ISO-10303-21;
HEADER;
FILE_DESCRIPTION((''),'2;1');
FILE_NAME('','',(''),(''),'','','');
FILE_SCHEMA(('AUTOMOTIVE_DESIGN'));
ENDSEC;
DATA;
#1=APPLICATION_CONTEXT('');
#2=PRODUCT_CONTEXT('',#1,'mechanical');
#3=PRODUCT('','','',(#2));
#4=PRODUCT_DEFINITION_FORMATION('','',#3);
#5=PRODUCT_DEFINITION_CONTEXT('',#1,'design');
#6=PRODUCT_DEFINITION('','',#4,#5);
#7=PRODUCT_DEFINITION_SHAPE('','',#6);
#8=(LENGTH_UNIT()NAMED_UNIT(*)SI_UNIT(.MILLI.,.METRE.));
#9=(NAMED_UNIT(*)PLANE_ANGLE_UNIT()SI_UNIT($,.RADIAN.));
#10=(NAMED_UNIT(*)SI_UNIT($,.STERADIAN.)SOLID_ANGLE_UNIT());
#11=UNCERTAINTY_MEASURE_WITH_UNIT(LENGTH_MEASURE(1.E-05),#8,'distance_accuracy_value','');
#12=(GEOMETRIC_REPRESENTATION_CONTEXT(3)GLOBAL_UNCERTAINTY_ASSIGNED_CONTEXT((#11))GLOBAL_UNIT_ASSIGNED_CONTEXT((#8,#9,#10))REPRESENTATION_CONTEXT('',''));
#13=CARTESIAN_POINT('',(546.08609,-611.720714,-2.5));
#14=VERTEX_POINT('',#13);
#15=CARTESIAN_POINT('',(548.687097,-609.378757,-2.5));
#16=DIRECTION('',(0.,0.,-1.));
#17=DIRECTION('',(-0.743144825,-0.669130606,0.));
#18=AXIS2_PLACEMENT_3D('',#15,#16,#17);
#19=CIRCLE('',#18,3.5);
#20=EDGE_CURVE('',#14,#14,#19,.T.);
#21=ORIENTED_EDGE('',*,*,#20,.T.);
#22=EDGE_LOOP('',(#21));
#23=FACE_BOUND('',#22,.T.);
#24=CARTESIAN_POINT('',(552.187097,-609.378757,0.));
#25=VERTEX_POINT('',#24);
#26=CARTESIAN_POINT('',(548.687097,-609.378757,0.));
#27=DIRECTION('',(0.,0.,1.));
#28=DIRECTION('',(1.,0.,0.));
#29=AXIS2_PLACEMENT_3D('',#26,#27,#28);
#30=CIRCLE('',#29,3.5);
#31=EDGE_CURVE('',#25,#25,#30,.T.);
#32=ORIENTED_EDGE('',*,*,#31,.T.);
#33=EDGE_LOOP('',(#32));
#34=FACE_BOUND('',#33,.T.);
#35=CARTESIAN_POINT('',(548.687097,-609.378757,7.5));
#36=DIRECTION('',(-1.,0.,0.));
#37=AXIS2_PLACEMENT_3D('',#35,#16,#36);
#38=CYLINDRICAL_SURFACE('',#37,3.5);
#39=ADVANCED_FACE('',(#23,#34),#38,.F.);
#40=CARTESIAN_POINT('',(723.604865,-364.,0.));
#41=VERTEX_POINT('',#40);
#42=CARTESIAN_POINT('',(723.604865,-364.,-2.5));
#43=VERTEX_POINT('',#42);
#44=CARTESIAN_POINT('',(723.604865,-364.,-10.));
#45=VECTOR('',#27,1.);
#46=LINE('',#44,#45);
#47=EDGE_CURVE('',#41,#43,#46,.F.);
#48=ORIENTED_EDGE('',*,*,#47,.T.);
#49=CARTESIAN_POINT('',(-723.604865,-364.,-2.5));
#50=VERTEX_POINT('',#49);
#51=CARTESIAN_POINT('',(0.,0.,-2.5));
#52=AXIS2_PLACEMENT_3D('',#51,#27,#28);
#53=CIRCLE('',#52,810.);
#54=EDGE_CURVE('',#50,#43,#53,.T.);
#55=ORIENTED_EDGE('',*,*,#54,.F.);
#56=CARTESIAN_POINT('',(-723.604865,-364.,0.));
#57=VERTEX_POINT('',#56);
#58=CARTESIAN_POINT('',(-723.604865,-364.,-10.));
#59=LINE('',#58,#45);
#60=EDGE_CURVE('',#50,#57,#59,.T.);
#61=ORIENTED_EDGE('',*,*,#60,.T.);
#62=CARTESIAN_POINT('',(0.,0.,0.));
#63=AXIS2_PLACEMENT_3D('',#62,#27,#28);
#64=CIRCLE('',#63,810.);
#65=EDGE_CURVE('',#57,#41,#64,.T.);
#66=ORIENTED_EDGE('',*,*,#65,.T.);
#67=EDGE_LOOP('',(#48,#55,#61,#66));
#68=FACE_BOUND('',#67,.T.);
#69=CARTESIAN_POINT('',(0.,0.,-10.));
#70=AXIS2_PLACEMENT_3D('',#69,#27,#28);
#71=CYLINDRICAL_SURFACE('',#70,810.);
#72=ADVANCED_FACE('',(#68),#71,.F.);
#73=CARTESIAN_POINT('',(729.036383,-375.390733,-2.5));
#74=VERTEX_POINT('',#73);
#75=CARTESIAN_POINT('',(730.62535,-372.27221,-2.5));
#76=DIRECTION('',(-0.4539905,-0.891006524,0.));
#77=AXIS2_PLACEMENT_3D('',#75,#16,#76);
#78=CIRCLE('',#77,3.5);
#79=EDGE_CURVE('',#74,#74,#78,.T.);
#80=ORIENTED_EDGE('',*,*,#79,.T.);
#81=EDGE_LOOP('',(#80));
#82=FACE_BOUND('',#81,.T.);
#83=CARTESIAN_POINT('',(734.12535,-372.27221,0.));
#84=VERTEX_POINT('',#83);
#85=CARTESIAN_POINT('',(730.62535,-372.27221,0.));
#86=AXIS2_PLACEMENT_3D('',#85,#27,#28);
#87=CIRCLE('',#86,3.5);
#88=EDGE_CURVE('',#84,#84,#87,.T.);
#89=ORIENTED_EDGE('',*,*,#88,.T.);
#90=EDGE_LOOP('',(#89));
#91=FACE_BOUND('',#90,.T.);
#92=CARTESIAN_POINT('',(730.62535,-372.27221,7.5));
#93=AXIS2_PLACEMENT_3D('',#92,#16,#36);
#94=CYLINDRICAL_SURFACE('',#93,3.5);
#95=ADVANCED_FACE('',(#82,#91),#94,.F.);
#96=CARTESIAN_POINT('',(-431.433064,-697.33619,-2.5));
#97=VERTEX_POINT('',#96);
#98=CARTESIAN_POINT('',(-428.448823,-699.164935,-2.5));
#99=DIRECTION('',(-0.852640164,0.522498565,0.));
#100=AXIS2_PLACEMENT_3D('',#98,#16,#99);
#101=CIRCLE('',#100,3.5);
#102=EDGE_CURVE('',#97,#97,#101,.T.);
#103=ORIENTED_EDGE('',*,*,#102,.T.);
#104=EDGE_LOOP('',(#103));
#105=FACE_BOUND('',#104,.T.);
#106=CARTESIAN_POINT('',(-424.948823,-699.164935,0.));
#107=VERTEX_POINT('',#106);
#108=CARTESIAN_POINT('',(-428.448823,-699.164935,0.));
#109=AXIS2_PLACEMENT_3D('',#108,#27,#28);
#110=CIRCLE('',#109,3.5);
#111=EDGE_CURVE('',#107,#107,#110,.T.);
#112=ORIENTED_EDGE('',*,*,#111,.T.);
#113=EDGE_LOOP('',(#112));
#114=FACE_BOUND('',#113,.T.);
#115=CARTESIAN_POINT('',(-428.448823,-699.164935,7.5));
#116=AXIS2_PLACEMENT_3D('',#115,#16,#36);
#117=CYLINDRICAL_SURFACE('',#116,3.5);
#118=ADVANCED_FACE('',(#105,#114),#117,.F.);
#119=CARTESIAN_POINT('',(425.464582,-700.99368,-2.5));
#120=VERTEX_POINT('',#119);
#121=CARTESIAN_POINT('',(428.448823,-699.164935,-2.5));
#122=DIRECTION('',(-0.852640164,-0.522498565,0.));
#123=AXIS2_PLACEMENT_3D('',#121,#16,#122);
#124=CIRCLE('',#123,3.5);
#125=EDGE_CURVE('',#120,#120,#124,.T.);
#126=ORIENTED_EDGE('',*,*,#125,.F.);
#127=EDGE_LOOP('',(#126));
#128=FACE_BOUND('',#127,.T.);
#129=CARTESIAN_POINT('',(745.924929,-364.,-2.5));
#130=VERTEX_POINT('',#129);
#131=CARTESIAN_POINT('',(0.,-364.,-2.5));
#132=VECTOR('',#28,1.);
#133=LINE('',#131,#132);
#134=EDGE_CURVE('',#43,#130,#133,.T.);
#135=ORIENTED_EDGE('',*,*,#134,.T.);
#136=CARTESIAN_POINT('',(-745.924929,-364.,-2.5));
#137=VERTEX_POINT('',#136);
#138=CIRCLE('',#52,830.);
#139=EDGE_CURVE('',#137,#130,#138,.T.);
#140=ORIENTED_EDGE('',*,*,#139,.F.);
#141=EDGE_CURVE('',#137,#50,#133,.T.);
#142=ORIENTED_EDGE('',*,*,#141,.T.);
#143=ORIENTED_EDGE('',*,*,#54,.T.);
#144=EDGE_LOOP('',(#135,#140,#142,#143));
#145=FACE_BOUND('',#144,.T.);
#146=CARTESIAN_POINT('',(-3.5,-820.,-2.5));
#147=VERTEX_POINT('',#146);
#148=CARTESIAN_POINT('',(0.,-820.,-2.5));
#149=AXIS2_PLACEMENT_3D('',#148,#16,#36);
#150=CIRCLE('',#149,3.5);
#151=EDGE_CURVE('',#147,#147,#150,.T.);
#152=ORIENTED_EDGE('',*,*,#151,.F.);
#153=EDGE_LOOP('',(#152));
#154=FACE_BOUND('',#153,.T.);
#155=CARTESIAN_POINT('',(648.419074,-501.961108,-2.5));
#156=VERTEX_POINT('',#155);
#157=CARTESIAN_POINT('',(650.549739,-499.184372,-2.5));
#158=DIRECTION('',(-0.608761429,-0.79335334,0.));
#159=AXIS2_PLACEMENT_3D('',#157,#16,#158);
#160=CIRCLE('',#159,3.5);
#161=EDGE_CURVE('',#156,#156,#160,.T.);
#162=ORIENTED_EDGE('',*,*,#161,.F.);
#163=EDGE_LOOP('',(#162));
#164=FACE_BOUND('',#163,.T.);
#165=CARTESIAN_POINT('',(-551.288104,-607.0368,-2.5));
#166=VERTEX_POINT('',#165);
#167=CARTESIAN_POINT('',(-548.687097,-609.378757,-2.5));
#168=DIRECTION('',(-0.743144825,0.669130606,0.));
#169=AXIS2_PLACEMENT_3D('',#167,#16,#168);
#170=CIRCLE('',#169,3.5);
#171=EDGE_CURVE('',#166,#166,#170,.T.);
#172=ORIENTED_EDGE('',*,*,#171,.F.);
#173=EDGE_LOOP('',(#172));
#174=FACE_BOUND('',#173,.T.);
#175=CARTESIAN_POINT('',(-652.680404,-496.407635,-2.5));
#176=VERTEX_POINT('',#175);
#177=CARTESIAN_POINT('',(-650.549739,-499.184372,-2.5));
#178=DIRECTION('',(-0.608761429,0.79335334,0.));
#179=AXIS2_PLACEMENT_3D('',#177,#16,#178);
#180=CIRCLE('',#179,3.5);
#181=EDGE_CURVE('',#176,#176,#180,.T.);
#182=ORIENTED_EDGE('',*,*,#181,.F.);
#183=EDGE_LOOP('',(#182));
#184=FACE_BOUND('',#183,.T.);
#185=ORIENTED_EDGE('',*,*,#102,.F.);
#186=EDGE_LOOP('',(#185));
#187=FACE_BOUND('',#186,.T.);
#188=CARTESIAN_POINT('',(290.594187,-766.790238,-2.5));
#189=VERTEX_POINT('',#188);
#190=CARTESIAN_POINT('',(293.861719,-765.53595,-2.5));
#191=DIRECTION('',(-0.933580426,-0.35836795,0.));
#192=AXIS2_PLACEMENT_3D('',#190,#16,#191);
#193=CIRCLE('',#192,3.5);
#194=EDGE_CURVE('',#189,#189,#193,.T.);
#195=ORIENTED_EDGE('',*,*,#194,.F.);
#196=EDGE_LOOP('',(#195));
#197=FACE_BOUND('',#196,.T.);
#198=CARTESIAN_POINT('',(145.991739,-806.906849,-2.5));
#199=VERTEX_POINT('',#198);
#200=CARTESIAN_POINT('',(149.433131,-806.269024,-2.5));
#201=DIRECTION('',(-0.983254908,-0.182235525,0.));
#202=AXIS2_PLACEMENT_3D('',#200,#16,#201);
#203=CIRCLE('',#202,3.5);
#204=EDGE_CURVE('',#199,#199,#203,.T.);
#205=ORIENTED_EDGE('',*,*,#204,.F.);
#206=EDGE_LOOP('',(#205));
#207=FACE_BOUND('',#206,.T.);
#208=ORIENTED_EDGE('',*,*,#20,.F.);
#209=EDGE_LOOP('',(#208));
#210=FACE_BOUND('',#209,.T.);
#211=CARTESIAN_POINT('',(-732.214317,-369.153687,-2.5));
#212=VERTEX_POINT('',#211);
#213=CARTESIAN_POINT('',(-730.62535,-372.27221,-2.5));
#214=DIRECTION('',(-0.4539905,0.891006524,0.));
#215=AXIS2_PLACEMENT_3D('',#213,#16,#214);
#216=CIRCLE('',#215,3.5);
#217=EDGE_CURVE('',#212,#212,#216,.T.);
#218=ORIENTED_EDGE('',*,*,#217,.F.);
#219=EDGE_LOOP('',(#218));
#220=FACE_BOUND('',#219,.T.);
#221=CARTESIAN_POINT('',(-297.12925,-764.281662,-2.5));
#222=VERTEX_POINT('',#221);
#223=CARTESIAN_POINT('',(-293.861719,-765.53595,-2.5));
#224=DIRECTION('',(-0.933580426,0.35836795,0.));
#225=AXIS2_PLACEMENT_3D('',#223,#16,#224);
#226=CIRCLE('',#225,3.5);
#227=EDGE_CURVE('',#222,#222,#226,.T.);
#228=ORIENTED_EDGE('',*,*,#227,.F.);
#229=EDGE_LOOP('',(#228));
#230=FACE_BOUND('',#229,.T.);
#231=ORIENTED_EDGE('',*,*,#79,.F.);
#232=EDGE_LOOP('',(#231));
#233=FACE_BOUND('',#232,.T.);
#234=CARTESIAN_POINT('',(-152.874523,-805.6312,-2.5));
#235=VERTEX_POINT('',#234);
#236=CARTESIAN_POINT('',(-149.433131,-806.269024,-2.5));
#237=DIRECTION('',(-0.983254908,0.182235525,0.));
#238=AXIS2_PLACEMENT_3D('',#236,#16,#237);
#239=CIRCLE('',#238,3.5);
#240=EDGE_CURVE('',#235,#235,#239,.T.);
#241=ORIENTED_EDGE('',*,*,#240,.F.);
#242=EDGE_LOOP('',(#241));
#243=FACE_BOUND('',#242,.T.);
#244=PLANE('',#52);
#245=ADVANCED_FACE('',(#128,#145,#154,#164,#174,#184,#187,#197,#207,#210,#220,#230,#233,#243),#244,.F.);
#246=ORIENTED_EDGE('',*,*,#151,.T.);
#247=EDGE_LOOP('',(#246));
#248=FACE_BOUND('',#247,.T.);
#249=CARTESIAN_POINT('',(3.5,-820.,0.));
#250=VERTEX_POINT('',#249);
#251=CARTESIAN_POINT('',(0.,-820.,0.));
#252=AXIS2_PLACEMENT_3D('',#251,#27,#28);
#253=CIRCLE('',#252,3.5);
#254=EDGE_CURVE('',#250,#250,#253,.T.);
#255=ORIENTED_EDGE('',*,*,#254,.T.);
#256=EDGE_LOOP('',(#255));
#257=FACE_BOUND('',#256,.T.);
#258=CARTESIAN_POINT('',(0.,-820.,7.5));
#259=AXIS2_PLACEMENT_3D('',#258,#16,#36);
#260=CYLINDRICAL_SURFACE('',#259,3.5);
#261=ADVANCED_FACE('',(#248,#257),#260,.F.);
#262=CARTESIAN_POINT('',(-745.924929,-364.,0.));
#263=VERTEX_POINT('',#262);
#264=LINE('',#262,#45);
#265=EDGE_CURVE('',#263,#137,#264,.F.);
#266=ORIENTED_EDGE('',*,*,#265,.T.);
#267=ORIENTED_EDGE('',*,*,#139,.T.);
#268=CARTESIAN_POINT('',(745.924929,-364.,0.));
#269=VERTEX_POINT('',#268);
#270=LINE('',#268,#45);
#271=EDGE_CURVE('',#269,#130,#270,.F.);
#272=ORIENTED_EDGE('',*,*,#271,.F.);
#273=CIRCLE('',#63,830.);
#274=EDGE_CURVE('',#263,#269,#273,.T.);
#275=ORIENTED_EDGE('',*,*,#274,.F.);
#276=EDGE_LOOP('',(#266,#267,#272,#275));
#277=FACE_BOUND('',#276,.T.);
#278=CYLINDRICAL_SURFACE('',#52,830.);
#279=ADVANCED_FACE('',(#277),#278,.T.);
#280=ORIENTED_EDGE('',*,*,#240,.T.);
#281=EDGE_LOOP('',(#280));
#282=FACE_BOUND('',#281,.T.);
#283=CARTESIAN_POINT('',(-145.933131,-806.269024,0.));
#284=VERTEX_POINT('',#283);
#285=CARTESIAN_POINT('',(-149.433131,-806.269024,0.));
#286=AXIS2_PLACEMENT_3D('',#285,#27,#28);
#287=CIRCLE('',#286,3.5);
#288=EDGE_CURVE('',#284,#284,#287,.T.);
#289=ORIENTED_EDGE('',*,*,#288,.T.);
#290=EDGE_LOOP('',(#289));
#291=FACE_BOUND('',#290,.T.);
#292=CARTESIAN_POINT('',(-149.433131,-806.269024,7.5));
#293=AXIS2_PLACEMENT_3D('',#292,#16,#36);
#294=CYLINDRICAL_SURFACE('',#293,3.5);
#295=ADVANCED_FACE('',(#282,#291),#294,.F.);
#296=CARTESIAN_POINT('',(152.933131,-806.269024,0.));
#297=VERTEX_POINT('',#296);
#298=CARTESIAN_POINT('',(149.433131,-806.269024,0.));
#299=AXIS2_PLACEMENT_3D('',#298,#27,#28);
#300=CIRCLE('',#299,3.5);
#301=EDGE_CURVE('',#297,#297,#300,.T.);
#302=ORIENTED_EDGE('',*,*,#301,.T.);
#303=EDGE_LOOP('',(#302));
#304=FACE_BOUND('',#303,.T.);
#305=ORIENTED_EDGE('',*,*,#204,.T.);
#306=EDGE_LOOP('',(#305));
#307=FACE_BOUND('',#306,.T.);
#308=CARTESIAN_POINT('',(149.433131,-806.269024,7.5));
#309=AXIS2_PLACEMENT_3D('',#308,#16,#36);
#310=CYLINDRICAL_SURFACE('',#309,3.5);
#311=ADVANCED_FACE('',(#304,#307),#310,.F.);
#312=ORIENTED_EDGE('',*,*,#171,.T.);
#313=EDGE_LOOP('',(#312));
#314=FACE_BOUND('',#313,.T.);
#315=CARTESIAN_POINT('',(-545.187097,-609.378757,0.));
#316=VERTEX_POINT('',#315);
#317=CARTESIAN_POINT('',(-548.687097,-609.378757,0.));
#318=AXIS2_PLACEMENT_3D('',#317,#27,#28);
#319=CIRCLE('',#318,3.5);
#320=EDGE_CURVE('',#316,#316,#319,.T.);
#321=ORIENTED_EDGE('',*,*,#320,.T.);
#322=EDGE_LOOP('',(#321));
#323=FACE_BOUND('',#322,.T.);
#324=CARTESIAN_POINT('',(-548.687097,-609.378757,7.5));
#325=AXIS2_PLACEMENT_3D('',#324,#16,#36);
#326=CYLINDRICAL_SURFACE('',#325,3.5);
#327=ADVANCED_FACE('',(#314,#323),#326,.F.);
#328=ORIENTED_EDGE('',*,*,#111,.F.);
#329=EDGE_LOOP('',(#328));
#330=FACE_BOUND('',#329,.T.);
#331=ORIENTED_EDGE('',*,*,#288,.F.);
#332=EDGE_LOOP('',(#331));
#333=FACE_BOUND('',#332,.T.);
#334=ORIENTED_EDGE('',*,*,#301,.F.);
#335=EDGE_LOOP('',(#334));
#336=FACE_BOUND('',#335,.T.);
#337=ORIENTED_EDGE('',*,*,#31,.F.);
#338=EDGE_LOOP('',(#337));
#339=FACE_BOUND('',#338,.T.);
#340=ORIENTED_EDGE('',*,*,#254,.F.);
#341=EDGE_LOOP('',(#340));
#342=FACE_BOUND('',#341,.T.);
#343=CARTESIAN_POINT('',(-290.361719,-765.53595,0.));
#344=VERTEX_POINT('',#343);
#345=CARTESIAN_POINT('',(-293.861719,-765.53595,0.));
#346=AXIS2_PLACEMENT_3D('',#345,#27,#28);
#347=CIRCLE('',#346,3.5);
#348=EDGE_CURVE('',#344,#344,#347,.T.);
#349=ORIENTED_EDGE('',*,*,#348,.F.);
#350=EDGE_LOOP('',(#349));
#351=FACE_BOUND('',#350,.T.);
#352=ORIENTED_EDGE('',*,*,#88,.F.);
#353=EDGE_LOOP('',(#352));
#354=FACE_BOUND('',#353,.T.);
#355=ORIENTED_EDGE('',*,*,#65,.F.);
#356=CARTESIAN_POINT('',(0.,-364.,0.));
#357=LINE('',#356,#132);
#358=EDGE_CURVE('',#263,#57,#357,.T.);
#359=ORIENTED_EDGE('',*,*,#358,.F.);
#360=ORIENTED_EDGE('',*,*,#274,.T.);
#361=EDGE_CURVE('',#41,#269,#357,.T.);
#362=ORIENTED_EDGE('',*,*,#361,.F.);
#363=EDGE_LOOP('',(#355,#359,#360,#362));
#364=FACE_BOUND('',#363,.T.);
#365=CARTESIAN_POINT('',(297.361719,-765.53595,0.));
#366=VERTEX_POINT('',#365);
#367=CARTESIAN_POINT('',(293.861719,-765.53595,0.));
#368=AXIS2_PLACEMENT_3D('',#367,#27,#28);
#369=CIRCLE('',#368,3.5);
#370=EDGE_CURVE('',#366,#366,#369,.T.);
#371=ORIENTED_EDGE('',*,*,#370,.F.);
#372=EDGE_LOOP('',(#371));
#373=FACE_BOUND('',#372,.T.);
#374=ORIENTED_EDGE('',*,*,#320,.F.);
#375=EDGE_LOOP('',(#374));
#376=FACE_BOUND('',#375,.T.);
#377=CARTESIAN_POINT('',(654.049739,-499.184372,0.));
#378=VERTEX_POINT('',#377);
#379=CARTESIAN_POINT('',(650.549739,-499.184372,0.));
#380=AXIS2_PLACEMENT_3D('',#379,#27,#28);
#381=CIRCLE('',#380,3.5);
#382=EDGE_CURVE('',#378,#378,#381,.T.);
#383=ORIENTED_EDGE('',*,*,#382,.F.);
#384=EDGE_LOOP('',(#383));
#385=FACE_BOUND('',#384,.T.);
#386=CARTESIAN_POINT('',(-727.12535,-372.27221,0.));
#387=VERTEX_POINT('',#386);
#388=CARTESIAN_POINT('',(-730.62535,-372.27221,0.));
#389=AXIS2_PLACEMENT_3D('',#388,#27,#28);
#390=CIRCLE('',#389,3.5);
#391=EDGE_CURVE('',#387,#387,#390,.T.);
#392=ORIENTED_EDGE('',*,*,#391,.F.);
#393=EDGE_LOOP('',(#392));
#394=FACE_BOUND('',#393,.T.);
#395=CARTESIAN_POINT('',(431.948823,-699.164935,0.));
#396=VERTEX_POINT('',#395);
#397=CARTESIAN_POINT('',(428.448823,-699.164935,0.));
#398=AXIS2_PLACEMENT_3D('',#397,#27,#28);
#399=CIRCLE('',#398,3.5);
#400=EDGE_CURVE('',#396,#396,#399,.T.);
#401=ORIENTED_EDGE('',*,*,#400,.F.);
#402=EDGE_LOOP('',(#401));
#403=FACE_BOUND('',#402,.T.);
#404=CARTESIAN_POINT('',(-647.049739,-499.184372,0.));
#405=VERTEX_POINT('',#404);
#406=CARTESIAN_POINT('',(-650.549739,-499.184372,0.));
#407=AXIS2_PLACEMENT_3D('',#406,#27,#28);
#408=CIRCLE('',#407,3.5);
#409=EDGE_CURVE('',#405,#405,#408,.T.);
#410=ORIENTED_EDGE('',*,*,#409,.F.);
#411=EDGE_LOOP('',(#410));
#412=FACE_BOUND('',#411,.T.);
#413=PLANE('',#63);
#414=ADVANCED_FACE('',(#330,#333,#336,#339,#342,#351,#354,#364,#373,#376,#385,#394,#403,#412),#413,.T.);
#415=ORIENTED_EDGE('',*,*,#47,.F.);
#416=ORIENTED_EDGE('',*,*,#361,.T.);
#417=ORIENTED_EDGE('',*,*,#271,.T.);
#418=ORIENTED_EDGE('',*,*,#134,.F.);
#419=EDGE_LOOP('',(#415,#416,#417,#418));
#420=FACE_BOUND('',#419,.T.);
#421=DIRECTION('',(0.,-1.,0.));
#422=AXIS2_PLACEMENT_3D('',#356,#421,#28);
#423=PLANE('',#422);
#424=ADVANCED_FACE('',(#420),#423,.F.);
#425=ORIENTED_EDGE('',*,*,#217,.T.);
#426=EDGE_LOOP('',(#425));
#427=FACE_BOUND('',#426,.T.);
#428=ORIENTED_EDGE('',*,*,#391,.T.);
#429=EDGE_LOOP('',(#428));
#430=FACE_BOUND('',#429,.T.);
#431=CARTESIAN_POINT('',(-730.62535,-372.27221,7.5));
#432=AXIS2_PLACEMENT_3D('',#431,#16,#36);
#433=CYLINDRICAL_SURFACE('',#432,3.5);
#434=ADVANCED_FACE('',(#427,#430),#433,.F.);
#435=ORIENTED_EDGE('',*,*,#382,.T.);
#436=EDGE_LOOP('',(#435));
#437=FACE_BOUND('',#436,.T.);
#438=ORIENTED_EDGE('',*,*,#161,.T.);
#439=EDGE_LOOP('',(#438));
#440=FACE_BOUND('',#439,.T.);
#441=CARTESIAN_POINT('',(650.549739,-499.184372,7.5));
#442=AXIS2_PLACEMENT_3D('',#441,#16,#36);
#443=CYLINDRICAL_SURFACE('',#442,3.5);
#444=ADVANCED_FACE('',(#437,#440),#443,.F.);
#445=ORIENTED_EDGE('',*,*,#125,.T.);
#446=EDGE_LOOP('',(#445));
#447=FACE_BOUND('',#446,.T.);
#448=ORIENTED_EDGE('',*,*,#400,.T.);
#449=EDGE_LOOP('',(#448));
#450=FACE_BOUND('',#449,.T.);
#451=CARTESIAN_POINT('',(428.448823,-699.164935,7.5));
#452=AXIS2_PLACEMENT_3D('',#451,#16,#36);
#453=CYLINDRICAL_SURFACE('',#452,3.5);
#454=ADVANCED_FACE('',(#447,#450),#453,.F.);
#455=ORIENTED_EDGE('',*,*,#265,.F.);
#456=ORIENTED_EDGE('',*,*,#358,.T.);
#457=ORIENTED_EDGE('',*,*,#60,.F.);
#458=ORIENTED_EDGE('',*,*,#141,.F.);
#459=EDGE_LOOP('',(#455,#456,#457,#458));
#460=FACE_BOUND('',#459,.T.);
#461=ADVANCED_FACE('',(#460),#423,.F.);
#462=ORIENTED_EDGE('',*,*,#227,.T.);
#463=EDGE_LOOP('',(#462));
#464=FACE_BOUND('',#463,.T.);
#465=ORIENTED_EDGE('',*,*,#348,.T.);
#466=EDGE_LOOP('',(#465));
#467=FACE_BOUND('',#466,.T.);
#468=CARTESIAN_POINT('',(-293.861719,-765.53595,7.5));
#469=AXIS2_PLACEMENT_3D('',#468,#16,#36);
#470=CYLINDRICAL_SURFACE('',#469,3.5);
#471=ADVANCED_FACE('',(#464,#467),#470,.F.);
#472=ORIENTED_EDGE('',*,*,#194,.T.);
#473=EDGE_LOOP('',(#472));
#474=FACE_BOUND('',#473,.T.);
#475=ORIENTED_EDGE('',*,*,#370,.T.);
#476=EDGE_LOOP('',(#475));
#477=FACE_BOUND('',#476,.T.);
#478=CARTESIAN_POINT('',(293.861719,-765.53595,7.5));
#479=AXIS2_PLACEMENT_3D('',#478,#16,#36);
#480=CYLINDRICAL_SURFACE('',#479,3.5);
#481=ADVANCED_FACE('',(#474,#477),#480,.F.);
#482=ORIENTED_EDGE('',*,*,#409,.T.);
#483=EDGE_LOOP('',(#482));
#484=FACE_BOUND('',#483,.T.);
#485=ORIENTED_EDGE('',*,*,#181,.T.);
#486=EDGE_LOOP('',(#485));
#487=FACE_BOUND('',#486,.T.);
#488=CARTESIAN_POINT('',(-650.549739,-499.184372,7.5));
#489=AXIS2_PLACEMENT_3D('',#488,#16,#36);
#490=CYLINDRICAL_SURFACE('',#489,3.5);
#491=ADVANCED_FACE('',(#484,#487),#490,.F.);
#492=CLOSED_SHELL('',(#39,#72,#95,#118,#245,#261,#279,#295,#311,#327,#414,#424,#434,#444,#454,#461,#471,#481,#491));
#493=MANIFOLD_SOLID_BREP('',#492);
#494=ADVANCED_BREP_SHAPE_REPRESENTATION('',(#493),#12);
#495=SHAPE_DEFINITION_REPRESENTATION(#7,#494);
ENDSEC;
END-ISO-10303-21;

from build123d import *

# Parameters (mm, degrees)
BASE_FLANGE1_DEPTH              = 2.5
SKETCH2_W                       = 1968.518691842
SKETCH2_H                       = 782.123286761
CUT_EXTRUDE1_DEPTH              = 10
CUT_EXTRUDE3_DEPTH              = 10
SKETCH10_R                      = 3.5
CUT_EXTRUDE4_DEPTH              = 10
CIRPATTERN1_COUNT               = 10
CIRPATTERN1_ANGLE               = 94.5
CIRPATTERN1_THE_OTHER_WAY_COUNT = 10
CIRPATTERN1_THE_OTHER_WAY_ANGLE = 94.5


# Sheet-metal steps are written as plain solids
with BuildPart() as part:
    # Sketch1 → Base-Flange1 (new body)
    with BuildSketch(Plane.XY):
        with BuildLine():
            Line((829.984939622, -5), (-829.984939622, -5))
            ThreePointArc((-829.984939622, -5), (0, -830), (829.984939622, -5))
        make_face()
    extrude(amount=-BASE_FLANGE1_DEPTH)

    # Sketch2 → Cut-Extrude1 (cut)
    with BuildSketch(Plane.XY):
        with Locations((10.387961435, 27.061643381)):
            Rectangle(SKETCH2_W, SKETCH2_H)
    extrude(amount=-CUT_EXTRUDE1_DEPTH, mode=Mode.SUBTRACT)

    # Sketch9 → Cut-Extrude3 (cut)
    with BuildSketch(Plane.XY):
        with BuildLine():
            Line((-723.60486455, -364), (723.60486455, -364))
            ThreePointArc((723.60486455, -364), (0, -810), (-723.60486455, -364))
        make_face()
    extrude(amount=-CUT_EXTRUDE3_DEPTH, mode=Mode.SUBTRACT)

    # Sketch10 → Cut-Extrude4 (cut)
    with BuildSketch(Plane(origin=(0, 0, -2.5), x_dir=(-1, 0, 0), z_dir=(0, 0, -1))):
        with Locations((0, -820)):
            Circle(SKETCH10_R)
    cut_extrude4 = extrude(amount=-CUT_EXTRUDE4_DEPTH, mode=Mode.SUBTRACT)

    # CirPattern1: Cut-Extrude4 ×10 about axis
    cirpattern1_axis = Axis((0, 0, 0), (0, 0, 1))
    for i in range(1, CIRPATTERN1_COUNT):
        add(cut_extrude4.rotate(cirpattern1_axis, i * CIRPATTERN1_ANGLE / (CIRPATTERN1_COUNT - 1)), mode=Mode.SUBTRACT)

    # CirPattern1 the other way: Cut-Extrude4 ×10 about axis
    cirpattern1_the_other_way_axis = Axis((0, 0, 0), (0, 0, -1))
    for i in range(1, CIRPATTERN1_THE_OTHER_WAY_COUNT):
        add(cut_extrude4.rotate(cirpattern1_the_other_way_axis, i * CIRPATTERN1_THE_OTHER_WAY_ANGLE / (CIRPATTERN1_THE_OTHER_WAY_COUNT - 1)), mode=Mode.SUBTRACT)


solid = part.part
